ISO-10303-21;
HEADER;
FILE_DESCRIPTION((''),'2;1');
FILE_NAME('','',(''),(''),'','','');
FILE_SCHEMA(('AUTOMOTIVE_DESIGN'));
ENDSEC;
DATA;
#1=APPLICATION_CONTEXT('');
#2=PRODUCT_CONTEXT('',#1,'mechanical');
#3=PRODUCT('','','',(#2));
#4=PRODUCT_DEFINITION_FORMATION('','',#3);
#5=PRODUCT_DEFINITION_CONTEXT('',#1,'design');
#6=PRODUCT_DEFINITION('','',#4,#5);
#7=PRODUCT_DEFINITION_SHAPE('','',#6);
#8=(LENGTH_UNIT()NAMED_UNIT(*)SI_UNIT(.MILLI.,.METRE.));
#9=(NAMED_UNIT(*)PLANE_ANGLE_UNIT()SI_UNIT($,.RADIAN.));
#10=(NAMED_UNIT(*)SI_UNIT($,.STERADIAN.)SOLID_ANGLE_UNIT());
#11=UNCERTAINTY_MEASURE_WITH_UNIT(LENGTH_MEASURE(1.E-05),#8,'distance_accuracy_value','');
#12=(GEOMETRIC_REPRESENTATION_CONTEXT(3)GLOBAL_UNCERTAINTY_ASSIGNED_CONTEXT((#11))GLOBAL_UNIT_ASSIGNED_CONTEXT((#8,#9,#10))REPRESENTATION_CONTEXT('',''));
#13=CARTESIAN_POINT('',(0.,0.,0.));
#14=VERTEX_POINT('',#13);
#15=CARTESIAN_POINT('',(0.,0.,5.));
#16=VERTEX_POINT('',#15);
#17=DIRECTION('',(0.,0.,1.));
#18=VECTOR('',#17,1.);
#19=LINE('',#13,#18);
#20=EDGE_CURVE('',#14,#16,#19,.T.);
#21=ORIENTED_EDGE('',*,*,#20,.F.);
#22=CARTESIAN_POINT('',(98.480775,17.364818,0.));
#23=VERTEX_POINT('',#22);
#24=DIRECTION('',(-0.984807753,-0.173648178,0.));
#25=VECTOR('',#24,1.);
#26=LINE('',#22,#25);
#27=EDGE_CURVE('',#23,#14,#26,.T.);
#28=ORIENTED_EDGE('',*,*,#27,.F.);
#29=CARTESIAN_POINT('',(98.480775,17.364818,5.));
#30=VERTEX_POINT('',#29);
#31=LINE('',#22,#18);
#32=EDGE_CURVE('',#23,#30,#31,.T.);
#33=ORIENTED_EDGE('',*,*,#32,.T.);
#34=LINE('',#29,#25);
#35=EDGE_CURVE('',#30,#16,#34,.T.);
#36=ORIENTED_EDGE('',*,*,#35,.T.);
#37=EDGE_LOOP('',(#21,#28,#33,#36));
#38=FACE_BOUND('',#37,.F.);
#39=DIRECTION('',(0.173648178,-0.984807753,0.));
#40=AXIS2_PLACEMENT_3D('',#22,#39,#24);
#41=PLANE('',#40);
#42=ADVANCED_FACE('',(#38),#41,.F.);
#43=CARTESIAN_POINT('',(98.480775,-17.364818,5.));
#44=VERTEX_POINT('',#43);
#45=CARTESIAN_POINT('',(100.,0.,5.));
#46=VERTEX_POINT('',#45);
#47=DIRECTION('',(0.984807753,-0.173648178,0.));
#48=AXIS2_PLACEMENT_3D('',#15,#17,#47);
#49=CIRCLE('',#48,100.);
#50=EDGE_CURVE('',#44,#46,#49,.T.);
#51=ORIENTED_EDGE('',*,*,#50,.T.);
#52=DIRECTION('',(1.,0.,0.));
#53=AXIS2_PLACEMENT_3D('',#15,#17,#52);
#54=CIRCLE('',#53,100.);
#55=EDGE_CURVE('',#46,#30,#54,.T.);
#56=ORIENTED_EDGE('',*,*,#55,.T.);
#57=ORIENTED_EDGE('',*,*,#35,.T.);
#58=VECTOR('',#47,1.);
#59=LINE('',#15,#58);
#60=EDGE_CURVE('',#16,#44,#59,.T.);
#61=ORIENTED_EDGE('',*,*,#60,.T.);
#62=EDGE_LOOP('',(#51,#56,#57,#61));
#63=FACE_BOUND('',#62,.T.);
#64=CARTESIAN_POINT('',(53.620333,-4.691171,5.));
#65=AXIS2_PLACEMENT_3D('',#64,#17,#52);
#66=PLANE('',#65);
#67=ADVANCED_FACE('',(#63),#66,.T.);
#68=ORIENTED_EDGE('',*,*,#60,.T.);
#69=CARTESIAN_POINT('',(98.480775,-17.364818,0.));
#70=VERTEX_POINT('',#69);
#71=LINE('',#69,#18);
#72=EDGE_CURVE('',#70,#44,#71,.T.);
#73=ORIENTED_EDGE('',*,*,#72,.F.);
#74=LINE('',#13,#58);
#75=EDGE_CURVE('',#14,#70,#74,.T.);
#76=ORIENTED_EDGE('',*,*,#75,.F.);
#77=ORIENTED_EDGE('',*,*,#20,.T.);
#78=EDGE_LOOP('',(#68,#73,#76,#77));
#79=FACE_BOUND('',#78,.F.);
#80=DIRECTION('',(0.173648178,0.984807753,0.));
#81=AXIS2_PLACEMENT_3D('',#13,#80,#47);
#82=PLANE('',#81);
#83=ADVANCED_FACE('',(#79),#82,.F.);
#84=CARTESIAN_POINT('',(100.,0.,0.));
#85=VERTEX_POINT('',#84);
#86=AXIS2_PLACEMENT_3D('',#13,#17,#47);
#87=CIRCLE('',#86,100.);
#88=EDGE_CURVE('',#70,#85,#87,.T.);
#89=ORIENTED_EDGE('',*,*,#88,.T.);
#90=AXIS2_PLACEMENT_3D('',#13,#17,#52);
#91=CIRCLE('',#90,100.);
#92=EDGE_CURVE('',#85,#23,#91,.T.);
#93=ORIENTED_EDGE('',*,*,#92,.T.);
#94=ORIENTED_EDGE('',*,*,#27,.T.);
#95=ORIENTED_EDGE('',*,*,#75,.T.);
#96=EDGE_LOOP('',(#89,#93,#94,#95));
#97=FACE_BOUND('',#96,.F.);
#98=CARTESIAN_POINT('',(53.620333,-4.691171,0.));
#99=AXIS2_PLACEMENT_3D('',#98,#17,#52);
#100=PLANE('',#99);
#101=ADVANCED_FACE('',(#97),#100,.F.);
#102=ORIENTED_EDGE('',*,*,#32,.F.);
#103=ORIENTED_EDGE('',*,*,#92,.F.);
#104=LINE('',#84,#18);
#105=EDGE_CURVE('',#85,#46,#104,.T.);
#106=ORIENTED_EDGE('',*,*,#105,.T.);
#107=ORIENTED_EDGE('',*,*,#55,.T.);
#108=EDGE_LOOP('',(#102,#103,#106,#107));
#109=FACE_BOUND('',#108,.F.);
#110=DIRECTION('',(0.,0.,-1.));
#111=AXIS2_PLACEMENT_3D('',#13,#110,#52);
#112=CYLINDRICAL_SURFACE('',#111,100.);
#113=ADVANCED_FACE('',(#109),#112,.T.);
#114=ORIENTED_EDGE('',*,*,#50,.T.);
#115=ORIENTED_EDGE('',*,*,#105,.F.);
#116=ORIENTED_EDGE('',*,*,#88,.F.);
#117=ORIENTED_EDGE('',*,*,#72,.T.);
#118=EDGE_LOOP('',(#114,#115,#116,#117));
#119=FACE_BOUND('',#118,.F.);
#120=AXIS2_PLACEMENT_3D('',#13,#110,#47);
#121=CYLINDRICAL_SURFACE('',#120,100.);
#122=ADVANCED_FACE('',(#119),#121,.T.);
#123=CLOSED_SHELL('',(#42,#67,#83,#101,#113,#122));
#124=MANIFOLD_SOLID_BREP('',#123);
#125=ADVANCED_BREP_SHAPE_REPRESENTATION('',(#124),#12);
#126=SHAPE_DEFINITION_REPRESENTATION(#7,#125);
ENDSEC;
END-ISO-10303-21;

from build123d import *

# Parameters (mm, degrees)
F1_DEPTH = 5


# Not quite as in the source:
# - a feature of the source that left no trace in its solid (it failed there, or was rolled back) is left out


with BuildPart() as f1:
    # F0 (on Top) → F1 (new body)
    with BuildSketch(Plane.XY):
        with BuildLine():
            Line((0, 0), (98.4807753012, -17.3648177667))
            ThreePointArc((98.4807753012, -17.3648177667), (99.6194698092, -8.7155742748), (100, 0))
            Line((100, 0), (0, 0))
        make_face()
        with BuildLine():
            Line((0, 0), (100, 0))
            ThreePointArc((100, 0), (99.6194698092, 8.7155742748), (98.4807753012, 17.3648177667))
            Line((98.4807753012, 17.3648177667), (0, 0))
        make_face()
    extrude(amount=F1_DEPTH)


solid = f1.part
